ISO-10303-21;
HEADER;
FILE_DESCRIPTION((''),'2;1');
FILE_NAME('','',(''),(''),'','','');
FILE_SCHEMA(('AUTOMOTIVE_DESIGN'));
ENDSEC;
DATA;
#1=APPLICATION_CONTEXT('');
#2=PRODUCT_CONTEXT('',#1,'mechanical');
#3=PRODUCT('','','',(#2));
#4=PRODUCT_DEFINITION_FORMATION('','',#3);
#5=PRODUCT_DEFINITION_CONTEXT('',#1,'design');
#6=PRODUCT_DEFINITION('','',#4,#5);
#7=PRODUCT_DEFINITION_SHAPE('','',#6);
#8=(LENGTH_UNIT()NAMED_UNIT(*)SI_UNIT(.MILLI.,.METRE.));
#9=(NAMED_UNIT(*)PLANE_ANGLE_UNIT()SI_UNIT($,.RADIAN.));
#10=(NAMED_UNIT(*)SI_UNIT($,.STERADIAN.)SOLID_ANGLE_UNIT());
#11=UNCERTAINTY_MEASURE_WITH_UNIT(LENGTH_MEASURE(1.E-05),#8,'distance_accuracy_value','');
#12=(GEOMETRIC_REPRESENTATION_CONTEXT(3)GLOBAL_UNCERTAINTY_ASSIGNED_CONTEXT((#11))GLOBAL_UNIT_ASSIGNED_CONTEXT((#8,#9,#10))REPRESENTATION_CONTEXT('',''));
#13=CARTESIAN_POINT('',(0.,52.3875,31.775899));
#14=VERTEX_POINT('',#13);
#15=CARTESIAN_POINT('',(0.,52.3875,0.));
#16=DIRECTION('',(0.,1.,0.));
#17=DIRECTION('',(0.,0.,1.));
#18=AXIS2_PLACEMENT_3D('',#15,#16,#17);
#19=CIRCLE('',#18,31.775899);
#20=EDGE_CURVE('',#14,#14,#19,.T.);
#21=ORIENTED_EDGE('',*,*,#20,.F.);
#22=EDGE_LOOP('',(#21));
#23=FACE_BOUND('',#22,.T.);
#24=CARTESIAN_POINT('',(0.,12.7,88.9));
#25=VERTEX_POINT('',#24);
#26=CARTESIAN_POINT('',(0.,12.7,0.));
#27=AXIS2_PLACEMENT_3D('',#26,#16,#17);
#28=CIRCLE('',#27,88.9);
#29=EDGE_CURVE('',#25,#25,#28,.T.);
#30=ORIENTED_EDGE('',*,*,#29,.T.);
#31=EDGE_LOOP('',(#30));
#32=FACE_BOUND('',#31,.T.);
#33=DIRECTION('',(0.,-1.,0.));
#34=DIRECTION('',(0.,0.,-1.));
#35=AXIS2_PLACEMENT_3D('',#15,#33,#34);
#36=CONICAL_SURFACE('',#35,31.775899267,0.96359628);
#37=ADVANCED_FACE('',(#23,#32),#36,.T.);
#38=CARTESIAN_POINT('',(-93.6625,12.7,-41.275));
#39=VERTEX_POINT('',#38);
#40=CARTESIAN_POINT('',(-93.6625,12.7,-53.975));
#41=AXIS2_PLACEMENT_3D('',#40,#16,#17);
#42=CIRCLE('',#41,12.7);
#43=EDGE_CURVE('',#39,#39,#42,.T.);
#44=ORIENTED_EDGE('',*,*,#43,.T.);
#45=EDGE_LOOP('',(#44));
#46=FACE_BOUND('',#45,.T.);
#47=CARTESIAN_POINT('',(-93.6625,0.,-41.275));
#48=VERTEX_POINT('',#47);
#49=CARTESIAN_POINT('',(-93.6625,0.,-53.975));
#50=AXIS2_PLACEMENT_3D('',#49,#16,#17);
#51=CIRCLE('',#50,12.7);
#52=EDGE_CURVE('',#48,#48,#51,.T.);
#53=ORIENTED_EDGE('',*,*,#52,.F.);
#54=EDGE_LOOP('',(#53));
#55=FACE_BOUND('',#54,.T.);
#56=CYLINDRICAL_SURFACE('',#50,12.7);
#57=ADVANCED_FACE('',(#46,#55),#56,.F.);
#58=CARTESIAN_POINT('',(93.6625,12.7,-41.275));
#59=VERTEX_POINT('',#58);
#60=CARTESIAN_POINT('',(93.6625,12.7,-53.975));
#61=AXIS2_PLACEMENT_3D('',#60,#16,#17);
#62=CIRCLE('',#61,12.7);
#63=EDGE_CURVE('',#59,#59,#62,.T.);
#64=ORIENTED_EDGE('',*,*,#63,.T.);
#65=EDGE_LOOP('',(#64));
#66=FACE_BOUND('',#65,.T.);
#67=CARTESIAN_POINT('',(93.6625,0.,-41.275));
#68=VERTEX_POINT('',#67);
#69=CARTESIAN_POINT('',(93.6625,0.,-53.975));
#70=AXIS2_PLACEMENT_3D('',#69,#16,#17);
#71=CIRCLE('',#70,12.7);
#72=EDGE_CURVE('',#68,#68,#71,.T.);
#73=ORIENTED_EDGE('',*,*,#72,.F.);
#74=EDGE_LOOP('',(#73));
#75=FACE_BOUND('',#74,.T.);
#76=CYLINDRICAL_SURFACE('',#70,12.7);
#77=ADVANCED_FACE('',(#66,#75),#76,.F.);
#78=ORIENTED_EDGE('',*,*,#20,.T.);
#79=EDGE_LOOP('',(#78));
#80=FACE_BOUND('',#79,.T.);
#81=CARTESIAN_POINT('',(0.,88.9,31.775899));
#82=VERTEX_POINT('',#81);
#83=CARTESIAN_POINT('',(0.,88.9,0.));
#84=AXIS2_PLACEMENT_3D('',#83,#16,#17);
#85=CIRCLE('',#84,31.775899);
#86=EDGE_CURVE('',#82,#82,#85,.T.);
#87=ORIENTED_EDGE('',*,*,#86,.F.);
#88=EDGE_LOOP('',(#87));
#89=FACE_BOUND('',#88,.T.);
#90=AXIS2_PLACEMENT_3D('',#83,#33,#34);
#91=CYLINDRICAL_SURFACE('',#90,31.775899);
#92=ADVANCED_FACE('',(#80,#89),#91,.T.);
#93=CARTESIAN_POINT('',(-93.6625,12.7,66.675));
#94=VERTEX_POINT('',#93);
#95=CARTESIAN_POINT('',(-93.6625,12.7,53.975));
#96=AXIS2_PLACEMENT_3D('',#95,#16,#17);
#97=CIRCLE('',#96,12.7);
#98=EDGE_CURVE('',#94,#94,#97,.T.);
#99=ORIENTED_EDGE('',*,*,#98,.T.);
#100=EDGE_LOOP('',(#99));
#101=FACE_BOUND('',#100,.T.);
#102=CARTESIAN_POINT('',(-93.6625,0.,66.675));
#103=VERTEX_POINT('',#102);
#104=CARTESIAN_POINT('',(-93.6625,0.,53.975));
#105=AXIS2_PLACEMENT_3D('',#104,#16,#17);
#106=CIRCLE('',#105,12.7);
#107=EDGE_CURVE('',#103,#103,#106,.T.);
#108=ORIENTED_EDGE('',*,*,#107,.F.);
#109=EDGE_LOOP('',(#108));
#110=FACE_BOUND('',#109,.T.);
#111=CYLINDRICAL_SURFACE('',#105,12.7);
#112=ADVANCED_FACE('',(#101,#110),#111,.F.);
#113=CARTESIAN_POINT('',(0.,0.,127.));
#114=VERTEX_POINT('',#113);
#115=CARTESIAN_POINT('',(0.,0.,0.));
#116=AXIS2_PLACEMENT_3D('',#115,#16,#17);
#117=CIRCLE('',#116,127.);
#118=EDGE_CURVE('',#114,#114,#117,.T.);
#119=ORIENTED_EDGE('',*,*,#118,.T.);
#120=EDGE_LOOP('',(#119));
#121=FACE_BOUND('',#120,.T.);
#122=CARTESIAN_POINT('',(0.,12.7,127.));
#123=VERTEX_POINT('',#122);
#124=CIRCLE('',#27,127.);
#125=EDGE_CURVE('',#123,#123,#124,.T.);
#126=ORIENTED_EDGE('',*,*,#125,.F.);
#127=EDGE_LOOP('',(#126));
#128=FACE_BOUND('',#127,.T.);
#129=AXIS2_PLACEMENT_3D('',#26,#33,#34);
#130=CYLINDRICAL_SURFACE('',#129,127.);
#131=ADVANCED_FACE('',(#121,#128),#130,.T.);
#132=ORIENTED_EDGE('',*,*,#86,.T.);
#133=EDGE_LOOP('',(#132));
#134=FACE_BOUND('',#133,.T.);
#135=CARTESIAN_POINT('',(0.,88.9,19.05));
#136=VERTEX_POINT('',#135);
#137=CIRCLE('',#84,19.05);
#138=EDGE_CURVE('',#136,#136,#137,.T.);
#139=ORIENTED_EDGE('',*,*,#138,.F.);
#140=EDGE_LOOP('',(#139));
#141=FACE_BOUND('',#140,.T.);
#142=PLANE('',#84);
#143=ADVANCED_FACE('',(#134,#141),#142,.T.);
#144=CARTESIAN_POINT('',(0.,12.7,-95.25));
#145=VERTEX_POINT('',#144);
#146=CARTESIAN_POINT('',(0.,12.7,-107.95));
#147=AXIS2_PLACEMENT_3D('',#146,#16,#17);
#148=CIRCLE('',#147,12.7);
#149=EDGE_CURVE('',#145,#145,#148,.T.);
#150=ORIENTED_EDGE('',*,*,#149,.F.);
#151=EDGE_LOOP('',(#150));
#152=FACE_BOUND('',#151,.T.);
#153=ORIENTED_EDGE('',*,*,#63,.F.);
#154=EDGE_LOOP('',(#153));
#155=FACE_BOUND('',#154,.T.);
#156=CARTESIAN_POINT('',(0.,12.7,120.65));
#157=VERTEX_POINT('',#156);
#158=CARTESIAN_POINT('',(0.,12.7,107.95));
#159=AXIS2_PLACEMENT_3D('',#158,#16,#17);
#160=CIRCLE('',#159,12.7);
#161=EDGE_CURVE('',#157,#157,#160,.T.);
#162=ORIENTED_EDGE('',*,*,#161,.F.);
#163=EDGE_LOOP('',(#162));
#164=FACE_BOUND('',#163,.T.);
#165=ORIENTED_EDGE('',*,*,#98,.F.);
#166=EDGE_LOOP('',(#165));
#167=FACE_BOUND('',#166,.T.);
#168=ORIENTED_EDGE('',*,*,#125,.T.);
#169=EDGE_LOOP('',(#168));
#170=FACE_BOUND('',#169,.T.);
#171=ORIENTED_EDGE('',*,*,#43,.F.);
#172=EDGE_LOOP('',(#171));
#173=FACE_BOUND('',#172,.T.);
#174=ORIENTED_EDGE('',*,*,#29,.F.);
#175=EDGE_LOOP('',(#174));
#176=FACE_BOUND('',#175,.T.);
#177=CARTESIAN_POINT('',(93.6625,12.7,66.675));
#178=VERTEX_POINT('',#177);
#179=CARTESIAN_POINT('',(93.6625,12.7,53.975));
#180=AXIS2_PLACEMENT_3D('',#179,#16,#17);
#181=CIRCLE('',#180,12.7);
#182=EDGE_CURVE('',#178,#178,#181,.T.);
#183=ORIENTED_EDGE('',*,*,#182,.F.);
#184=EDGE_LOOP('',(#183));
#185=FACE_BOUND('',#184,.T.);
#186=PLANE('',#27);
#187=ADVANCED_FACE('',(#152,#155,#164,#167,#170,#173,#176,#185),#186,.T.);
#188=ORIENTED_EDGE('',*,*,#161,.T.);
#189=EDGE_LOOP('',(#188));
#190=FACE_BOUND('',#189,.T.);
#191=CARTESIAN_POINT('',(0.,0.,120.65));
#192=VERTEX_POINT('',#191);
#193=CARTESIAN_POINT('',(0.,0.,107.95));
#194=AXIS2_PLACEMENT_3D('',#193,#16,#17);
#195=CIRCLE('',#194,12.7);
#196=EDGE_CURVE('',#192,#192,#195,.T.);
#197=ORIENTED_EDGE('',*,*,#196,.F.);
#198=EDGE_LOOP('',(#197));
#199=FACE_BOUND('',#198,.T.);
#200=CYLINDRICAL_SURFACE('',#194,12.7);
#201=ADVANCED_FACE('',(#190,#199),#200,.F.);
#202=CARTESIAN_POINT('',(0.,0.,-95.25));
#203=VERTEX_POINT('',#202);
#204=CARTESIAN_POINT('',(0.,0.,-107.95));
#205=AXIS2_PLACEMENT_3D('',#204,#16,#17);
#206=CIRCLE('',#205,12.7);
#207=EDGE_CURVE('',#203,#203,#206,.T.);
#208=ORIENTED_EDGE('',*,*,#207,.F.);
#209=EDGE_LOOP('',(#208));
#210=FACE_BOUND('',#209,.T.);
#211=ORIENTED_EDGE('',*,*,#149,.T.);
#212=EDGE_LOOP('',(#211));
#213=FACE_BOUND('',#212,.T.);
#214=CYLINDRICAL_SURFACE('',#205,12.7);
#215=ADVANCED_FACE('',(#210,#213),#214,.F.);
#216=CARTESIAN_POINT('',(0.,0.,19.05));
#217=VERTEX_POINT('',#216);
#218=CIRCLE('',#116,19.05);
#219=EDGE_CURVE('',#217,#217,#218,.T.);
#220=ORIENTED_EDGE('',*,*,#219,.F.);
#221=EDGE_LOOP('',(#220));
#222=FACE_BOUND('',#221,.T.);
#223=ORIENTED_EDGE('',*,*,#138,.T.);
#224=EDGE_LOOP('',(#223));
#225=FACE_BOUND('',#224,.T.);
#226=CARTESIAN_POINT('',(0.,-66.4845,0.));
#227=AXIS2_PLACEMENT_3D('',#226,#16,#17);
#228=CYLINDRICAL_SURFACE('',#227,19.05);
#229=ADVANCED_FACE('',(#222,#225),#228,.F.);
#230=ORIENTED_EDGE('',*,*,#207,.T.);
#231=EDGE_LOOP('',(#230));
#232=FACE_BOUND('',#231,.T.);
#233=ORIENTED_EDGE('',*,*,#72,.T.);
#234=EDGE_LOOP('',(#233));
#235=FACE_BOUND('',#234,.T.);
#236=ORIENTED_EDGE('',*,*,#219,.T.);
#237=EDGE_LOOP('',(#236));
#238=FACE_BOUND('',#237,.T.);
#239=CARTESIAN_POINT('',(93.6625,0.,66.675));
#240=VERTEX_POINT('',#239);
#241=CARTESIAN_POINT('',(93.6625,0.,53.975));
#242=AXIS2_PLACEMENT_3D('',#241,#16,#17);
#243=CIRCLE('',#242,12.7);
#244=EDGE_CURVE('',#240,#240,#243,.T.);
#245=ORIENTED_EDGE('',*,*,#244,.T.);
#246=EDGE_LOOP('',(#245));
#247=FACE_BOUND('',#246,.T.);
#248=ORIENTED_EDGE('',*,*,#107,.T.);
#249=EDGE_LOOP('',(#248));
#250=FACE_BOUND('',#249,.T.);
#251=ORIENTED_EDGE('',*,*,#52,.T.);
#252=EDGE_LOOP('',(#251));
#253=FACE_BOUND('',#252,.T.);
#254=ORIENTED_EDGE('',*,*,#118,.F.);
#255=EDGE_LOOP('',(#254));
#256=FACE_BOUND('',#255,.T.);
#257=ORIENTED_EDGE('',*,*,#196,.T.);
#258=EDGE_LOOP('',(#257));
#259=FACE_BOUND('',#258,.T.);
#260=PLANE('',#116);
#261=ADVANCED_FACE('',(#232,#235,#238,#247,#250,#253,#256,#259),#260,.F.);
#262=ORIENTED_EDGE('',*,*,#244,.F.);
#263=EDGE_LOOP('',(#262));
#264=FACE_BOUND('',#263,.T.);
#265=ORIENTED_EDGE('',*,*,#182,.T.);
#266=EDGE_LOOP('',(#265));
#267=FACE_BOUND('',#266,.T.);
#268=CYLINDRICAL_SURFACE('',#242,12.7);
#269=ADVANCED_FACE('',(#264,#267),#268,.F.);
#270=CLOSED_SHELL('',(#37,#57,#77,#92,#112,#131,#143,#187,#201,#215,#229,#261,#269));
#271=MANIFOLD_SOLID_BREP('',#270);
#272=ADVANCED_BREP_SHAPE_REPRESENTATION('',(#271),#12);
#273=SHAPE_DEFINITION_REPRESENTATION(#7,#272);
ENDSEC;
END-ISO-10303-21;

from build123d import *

# Parameters (mm, degrees)
SKETCH1_R           = 127
BOSS_EXTRUDE1_DEPTH = 12.7
SKETCH2_R           = 12.7
CUT_EXTRUDE2_DEPTH  = 12.7
SKETCH4_R           = 88.9
BOSS_EXTRUDE2_DEPTH = 39.6875
CHAMFER2_SIZE2      = 57.124100733
CHAMFER2_SIZE       = 39.6875
SKETCH6_R           = 31.775899267
BOSS_EXTRUDE3_DEPTH = 36.5125
SKETCH7_R           = 19.05
CUT_EXTRUDE3_DEPTH  = 155.3845


with BuildPart() as part:
    # Sketch1 → Boss-Extrude1 (new body)
    with BuildSketch(Plane(origin=(0, 0, 0), x_dir=(1, 0, 0), z_dir=(0, 1, 0))):
        with Locations(Location((0, 0, 0), (0, 0, 270))):
            Circle(SKETCH1_R)
    extrude(amount=BOSS_EXTRUDE1_DEPTH)

    # Sketch2 → Cut-Extrude2 (cut)
    with BuildSketch(Plane(origin=(0, 12.7, 0), x_dir=(1, 0, 0), z_dir=(0, 1, 0))):
        with Locations(Location((0, 107.95, 0), (0, 0, 270))):
            Circle(SKETCH2_R)
        with Locations(Location((0, -107.95, 0), (0, 0, 270))):
            Circle(SKETCH2_R)
        with Locations(Location((-93.6625, 53.975, 0), (0, 0, 270))):
            Circle(SKETCH2_R)
        with Locations(Location((93.6625, 53.975, 0), (0, 0, 270))):
            Circle(SKETCH2_R)
        with Locations(Location((-93.6625, -53.975, 0), (0, 0, 270))):
            Circle(SKETCH2_R)
        with Locations(Location((93.6625, -53.975, 0), (0, 0, 270))):
            Circle(SKETCH2_R)
    extrude(amount=-CUT_EXTRUDE2_DEPTH, mode=Mode.SUBTRACT)

    # Sketch4 → Boss-Extrude2 (add)
    with BuildSketch(Plane(origin=(0, 12.7, 0), x_dir=(1, 0, 0), z_dir=(0, 1, 0))):
        with Locations(Location((0, 0, 0), (0, 0, 90))):
            Circle(SKETCH4_R)
    extrude(amount=BOSS_EXTRUDE2_DEPTH)

    # Chamfer2
    chamfer2_edges = [part.edges().sort_by_distance(p)[0] for p in [
        (0, 52.3875, 88.9),
    ]]
    chamfer2_side = [part.faces().sort_by_distance(p)[0] for p in [
        (0, 51.59375, 88.9),
    ]]
    chamfer(chamfer2_edges, length=CHAMFER2_SIZE - 0.0001, length2=CHAMFER2_SIZE2 - 0.0001, reference=chamfer2_side[0])  # a hair under: the kernel refuses the full size

    # Sketch6 → Boss-Extrude3 (add)
    with BuildSketch(Plane(origin=(0, 52.3875, 0), x_dir=(1, 0, 0), z_dir=(0, 1, 0))):
        with Locations(Location((0, 0, 0), (0, 0, 270))):
            Circle(SKETCH6_R)
    extrude(amount=BOSS_EXTRUDE3_DEPTH)

    # Sketch7 → Cut-Extrude3 (cut)
    with BuildSketch(Plane(origin=(0, 88.9, 0), x_dir=(1, 0, 0), z_dir=(0, 1, 0))):
        with Locations(Location((0, 0, 0), (0, 0, 270))):
            Circle(SKETCH7_R)
    extrude(amount=-CUT_EXTRUDE3_DEPTH, mode=Mode.SUBTRACT)


solid = part.part
